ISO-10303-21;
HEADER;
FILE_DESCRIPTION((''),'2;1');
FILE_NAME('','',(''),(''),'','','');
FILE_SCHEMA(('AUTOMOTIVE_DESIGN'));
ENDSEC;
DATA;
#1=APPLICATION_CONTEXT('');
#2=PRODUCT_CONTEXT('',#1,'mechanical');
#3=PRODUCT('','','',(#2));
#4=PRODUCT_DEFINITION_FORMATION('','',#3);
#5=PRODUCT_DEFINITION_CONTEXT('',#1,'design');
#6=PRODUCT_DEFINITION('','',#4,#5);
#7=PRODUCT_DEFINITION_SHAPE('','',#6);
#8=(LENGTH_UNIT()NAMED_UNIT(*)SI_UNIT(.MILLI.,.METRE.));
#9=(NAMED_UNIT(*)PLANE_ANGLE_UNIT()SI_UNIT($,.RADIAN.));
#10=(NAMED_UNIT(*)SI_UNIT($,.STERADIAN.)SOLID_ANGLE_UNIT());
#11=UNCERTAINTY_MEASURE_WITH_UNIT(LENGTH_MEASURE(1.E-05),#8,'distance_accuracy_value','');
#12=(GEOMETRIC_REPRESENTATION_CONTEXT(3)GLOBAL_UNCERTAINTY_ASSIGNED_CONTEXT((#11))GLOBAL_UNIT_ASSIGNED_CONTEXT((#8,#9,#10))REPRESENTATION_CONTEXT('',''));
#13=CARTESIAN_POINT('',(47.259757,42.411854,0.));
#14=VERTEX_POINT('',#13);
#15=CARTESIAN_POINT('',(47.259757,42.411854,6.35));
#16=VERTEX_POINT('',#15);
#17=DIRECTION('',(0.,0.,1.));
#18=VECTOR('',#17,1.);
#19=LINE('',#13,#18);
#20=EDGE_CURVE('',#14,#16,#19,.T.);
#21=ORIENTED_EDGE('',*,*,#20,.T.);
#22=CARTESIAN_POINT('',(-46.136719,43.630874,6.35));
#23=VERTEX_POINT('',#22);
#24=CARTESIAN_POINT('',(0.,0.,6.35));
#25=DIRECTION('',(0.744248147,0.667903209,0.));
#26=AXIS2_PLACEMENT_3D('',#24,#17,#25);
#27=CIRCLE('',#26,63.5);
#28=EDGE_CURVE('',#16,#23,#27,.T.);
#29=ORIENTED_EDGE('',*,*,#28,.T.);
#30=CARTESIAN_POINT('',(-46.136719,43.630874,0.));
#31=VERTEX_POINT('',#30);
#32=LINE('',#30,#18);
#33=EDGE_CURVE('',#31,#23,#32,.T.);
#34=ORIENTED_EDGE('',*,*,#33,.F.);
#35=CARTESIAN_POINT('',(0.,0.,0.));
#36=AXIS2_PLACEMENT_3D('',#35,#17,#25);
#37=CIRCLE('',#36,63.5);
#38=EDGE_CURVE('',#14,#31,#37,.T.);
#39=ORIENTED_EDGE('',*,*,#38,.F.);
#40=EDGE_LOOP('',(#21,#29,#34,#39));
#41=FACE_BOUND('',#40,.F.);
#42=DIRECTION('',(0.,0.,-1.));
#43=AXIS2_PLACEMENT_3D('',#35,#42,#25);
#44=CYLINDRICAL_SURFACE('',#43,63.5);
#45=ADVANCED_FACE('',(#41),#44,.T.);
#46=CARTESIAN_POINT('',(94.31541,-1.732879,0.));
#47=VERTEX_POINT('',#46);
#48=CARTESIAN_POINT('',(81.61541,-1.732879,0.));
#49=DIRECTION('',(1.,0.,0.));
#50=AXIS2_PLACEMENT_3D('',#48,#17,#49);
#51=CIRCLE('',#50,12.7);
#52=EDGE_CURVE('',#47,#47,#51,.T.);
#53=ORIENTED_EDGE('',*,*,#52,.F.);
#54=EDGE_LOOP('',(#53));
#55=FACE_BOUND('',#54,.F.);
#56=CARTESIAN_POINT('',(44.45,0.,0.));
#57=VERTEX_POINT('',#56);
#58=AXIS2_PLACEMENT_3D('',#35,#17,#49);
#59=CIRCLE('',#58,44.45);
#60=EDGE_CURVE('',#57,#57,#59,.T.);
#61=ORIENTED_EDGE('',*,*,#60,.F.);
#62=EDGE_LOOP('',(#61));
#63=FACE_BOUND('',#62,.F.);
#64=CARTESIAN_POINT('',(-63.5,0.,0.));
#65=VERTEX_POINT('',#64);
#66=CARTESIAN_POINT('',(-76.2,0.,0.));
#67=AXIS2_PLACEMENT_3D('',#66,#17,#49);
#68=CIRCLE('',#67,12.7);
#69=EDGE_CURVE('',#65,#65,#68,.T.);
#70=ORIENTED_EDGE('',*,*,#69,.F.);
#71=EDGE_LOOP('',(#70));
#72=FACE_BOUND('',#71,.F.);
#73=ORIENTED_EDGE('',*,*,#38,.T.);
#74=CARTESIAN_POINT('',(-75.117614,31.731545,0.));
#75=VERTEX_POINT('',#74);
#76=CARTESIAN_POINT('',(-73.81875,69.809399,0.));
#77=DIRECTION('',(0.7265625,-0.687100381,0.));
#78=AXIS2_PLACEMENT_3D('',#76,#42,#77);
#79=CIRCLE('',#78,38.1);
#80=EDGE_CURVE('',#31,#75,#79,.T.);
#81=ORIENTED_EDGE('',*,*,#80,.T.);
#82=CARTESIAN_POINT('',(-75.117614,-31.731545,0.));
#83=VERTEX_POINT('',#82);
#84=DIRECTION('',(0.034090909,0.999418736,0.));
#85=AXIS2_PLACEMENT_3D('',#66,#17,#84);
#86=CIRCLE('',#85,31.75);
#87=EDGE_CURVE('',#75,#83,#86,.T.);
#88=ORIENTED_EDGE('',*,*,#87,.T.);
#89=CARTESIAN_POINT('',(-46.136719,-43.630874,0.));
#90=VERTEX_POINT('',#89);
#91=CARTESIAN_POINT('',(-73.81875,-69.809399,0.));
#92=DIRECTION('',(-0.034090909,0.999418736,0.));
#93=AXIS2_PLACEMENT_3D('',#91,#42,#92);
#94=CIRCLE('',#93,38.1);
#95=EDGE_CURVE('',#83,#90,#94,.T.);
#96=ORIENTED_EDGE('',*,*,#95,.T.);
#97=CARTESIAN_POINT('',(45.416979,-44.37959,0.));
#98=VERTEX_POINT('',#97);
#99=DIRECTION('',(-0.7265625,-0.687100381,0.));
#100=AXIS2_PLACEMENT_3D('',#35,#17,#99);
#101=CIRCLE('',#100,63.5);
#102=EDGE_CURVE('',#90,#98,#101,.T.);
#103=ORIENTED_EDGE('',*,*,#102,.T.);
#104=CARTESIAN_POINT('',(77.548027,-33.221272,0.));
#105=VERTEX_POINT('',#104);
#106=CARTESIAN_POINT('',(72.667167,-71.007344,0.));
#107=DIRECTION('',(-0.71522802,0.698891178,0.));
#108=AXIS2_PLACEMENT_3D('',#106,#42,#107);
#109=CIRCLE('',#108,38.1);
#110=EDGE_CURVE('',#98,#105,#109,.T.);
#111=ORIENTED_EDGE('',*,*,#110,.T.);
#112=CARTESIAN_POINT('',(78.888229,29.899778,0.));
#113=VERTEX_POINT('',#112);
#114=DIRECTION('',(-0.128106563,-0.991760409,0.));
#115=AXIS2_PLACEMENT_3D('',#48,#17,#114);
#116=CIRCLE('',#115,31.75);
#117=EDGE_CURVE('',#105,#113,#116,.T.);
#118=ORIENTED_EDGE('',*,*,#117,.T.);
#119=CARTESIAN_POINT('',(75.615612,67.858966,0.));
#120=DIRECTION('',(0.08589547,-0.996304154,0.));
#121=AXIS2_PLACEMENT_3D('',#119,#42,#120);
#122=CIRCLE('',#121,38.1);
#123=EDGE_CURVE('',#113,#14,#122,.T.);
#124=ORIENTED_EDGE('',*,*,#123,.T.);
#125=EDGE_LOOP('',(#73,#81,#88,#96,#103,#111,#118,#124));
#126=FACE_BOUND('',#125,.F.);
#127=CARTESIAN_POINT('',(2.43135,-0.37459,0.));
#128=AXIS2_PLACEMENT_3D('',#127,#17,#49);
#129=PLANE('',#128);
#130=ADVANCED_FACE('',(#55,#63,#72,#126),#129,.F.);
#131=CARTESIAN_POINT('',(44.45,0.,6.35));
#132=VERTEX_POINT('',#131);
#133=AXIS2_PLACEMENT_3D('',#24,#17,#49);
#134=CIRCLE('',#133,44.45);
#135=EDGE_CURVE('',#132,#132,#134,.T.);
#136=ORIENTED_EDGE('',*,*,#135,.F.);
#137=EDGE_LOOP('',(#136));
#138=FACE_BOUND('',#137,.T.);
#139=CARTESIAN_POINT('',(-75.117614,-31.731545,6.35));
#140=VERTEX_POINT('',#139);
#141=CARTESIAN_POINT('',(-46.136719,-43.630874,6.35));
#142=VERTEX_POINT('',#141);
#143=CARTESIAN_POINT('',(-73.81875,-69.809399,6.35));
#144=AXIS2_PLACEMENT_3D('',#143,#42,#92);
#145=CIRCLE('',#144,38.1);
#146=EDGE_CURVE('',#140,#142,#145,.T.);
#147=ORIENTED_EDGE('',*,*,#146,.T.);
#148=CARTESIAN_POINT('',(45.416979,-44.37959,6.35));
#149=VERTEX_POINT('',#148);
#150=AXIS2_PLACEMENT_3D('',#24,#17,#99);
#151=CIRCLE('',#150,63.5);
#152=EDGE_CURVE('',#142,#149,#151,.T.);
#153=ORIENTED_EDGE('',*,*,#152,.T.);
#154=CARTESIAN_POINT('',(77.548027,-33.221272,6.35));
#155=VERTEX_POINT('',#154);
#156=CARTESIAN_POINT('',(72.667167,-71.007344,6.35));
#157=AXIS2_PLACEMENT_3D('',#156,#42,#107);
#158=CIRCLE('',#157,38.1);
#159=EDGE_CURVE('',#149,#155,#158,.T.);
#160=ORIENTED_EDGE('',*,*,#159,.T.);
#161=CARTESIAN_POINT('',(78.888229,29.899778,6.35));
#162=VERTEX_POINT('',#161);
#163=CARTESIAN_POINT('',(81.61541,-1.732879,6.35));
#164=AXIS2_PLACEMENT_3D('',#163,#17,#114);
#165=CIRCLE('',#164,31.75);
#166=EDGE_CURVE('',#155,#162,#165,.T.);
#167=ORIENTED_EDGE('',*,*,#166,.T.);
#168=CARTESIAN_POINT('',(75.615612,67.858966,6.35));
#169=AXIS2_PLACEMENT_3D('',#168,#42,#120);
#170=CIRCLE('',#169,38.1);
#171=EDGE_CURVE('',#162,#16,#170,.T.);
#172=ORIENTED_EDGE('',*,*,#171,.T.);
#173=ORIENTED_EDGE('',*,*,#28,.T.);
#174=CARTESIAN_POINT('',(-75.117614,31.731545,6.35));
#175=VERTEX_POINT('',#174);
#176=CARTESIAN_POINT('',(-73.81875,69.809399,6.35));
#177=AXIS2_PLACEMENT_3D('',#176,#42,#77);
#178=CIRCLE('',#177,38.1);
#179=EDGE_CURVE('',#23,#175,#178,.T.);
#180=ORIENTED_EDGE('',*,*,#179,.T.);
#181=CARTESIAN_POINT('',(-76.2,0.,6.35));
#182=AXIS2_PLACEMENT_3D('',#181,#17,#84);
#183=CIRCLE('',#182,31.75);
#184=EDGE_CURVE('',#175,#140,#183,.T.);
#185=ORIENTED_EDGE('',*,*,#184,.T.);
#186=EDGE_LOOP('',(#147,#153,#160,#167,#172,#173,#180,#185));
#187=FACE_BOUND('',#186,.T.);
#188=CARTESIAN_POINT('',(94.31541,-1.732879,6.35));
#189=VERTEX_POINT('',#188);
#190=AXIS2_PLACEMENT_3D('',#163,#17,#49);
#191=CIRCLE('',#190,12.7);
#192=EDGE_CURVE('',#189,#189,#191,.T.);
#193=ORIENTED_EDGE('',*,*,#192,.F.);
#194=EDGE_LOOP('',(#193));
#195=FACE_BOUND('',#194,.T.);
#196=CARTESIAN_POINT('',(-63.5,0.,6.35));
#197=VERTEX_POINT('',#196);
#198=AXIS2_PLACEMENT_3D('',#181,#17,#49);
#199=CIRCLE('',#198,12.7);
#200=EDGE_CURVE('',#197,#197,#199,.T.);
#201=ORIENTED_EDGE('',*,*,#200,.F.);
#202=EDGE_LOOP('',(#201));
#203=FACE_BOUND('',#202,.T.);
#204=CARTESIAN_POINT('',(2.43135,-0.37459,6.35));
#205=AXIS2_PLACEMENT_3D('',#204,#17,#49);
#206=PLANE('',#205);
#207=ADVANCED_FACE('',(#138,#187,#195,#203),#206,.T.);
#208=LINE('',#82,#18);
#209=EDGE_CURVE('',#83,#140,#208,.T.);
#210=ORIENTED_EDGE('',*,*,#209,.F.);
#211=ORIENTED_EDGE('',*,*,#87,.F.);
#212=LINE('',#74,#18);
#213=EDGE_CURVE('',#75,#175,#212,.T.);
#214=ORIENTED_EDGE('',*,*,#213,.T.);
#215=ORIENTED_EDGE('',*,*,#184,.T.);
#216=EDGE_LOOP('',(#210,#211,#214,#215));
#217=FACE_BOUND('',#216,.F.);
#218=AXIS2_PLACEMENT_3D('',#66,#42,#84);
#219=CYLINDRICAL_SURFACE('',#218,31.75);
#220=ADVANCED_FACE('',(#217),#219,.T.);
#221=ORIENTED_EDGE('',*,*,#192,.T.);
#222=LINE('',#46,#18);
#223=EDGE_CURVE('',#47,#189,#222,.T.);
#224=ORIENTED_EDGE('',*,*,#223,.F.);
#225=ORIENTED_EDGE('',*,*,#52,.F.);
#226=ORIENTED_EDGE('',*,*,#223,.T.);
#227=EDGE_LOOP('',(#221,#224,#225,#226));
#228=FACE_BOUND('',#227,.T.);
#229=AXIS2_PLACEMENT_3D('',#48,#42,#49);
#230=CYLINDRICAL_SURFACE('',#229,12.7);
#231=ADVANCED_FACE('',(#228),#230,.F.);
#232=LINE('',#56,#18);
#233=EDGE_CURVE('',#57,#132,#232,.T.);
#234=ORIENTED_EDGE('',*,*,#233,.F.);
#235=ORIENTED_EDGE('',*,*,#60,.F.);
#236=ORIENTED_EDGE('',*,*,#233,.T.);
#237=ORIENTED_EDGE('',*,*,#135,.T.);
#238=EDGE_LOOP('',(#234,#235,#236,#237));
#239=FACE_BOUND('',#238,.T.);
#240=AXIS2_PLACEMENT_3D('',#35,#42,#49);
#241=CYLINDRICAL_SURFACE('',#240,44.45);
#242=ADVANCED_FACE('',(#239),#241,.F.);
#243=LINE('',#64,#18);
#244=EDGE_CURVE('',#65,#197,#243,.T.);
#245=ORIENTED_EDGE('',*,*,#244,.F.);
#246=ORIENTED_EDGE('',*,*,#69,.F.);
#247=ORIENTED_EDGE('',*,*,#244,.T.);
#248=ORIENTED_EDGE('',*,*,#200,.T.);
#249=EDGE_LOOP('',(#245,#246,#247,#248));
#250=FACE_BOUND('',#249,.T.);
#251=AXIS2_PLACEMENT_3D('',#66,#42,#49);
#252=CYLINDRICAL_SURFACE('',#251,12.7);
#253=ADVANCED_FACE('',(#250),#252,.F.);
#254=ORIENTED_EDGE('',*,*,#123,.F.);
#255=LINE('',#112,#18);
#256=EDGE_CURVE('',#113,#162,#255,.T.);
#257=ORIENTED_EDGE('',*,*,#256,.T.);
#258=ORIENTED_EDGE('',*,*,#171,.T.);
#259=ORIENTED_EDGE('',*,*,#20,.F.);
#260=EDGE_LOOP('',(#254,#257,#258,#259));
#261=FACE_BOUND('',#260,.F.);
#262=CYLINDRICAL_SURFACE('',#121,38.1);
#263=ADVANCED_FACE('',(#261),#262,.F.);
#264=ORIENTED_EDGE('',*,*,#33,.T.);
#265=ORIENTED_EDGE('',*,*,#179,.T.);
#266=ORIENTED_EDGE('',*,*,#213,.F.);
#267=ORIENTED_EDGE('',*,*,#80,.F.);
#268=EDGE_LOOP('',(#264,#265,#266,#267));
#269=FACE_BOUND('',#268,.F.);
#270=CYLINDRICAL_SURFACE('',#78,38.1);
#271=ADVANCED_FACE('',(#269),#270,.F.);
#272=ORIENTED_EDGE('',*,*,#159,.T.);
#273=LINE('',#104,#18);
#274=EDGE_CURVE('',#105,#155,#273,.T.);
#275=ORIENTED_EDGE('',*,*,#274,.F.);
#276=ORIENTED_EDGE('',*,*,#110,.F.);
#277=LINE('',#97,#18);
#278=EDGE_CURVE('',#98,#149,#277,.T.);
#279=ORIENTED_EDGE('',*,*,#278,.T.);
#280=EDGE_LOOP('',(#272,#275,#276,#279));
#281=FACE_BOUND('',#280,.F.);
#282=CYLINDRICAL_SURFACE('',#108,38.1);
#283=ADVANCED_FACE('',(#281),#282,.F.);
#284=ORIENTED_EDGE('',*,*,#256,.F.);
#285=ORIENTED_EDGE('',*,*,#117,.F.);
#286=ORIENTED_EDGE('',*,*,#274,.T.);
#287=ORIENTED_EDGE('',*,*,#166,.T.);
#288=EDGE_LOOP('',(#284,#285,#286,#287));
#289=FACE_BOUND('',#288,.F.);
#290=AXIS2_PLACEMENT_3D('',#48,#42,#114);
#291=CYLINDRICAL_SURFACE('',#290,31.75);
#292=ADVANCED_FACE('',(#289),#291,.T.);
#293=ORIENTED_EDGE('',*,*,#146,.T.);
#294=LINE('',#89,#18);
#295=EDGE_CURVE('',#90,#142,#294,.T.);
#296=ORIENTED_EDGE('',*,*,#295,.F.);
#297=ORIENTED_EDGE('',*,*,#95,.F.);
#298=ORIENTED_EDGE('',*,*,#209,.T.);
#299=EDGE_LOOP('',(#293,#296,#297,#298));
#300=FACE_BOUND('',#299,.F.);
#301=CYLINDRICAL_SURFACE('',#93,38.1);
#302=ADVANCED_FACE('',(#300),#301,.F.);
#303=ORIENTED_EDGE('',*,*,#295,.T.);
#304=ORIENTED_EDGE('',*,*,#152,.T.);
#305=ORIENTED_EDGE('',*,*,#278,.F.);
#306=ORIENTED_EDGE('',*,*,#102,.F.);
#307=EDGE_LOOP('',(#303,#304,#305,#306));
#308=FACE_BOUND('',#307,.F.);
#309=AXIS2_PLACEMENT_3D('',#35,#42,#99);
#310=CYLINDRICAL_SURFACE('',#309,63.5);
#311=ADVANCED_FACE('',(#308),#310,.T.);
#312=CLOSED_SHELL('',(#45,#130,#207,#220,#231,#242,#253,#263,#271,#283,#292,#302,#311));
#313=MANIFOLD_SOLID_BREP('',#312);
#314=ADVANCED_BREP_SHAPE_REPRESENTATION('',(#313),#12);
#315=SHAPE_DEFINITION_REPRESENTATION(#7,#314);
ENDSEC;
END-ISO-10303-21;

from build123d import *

# Parameters (mm, degrees)
F0_R     = 12.7
F0_R_2   = 44.45
F1_DEPTH = 6.35


# Not quite as in the source:
# - a length typed as a fraction of an inch, garbled in the dataset ("3 / 203.2 mm" for 3/8 in), is restored


with BuildPart() as f1:
    # F0 (on Top) → F1 (new body)
    with BuildSketch(Plane.XY):
        with BuildLine():
            ThreePointArc((-46.13671875, 43.6308741946), (-59.3475236203, 34.5646316236), (-75.1176136364, 31.7315448688))
            ThreePointArc((-75.1176136364, 31.7315448688), (-107.95, 0), (-75.1176136364, -31.7315448688))
            ThreePointArc((-75.1176136364, -31.7315448688), (-59.3475236203, -34.5646316236), (-46.13671875, -43.6308741946))
            ThreePointArc((-46.13671875, -43.6308741946), (-0.5192783502, -63.4978767361), (45.4169792735, -44.3795898321))
            ThreePointArc((45.4169792735, -44.3795898321), (60.1682182179, -35.0158685824), (77.5480268965, -33.2212721562))
            ThreePointArc((77.5480268965, -33.2212721562), (113.3582561105, -2.4068513639), (78.8882291033, 29.8997777276))
            ThreePointArc((78.8882291033, 29.8997777276), (61.6002556172, 32.4304493339), (47.2597573079, 42.4118537581))
            ThreePointArc((47.2597573079, 42.4118537581), (0.8287379603, 63.4945918437), (-46.13671875, 43.6308741946))
        make_face()
        with Locations((81.6154102788, -1.7328791769)):
            Circle(F0_R, mode=Mode.SUBTRACT)
        with Locations((-76.2, 0)):
            Circle(F0_R, mode=Mode.SUBTRACT)
        Circle(F0_R_2, mode=Mode.SUBTRACT)
    extrude(amount=F1_DEPTH)


solid = f1.part
